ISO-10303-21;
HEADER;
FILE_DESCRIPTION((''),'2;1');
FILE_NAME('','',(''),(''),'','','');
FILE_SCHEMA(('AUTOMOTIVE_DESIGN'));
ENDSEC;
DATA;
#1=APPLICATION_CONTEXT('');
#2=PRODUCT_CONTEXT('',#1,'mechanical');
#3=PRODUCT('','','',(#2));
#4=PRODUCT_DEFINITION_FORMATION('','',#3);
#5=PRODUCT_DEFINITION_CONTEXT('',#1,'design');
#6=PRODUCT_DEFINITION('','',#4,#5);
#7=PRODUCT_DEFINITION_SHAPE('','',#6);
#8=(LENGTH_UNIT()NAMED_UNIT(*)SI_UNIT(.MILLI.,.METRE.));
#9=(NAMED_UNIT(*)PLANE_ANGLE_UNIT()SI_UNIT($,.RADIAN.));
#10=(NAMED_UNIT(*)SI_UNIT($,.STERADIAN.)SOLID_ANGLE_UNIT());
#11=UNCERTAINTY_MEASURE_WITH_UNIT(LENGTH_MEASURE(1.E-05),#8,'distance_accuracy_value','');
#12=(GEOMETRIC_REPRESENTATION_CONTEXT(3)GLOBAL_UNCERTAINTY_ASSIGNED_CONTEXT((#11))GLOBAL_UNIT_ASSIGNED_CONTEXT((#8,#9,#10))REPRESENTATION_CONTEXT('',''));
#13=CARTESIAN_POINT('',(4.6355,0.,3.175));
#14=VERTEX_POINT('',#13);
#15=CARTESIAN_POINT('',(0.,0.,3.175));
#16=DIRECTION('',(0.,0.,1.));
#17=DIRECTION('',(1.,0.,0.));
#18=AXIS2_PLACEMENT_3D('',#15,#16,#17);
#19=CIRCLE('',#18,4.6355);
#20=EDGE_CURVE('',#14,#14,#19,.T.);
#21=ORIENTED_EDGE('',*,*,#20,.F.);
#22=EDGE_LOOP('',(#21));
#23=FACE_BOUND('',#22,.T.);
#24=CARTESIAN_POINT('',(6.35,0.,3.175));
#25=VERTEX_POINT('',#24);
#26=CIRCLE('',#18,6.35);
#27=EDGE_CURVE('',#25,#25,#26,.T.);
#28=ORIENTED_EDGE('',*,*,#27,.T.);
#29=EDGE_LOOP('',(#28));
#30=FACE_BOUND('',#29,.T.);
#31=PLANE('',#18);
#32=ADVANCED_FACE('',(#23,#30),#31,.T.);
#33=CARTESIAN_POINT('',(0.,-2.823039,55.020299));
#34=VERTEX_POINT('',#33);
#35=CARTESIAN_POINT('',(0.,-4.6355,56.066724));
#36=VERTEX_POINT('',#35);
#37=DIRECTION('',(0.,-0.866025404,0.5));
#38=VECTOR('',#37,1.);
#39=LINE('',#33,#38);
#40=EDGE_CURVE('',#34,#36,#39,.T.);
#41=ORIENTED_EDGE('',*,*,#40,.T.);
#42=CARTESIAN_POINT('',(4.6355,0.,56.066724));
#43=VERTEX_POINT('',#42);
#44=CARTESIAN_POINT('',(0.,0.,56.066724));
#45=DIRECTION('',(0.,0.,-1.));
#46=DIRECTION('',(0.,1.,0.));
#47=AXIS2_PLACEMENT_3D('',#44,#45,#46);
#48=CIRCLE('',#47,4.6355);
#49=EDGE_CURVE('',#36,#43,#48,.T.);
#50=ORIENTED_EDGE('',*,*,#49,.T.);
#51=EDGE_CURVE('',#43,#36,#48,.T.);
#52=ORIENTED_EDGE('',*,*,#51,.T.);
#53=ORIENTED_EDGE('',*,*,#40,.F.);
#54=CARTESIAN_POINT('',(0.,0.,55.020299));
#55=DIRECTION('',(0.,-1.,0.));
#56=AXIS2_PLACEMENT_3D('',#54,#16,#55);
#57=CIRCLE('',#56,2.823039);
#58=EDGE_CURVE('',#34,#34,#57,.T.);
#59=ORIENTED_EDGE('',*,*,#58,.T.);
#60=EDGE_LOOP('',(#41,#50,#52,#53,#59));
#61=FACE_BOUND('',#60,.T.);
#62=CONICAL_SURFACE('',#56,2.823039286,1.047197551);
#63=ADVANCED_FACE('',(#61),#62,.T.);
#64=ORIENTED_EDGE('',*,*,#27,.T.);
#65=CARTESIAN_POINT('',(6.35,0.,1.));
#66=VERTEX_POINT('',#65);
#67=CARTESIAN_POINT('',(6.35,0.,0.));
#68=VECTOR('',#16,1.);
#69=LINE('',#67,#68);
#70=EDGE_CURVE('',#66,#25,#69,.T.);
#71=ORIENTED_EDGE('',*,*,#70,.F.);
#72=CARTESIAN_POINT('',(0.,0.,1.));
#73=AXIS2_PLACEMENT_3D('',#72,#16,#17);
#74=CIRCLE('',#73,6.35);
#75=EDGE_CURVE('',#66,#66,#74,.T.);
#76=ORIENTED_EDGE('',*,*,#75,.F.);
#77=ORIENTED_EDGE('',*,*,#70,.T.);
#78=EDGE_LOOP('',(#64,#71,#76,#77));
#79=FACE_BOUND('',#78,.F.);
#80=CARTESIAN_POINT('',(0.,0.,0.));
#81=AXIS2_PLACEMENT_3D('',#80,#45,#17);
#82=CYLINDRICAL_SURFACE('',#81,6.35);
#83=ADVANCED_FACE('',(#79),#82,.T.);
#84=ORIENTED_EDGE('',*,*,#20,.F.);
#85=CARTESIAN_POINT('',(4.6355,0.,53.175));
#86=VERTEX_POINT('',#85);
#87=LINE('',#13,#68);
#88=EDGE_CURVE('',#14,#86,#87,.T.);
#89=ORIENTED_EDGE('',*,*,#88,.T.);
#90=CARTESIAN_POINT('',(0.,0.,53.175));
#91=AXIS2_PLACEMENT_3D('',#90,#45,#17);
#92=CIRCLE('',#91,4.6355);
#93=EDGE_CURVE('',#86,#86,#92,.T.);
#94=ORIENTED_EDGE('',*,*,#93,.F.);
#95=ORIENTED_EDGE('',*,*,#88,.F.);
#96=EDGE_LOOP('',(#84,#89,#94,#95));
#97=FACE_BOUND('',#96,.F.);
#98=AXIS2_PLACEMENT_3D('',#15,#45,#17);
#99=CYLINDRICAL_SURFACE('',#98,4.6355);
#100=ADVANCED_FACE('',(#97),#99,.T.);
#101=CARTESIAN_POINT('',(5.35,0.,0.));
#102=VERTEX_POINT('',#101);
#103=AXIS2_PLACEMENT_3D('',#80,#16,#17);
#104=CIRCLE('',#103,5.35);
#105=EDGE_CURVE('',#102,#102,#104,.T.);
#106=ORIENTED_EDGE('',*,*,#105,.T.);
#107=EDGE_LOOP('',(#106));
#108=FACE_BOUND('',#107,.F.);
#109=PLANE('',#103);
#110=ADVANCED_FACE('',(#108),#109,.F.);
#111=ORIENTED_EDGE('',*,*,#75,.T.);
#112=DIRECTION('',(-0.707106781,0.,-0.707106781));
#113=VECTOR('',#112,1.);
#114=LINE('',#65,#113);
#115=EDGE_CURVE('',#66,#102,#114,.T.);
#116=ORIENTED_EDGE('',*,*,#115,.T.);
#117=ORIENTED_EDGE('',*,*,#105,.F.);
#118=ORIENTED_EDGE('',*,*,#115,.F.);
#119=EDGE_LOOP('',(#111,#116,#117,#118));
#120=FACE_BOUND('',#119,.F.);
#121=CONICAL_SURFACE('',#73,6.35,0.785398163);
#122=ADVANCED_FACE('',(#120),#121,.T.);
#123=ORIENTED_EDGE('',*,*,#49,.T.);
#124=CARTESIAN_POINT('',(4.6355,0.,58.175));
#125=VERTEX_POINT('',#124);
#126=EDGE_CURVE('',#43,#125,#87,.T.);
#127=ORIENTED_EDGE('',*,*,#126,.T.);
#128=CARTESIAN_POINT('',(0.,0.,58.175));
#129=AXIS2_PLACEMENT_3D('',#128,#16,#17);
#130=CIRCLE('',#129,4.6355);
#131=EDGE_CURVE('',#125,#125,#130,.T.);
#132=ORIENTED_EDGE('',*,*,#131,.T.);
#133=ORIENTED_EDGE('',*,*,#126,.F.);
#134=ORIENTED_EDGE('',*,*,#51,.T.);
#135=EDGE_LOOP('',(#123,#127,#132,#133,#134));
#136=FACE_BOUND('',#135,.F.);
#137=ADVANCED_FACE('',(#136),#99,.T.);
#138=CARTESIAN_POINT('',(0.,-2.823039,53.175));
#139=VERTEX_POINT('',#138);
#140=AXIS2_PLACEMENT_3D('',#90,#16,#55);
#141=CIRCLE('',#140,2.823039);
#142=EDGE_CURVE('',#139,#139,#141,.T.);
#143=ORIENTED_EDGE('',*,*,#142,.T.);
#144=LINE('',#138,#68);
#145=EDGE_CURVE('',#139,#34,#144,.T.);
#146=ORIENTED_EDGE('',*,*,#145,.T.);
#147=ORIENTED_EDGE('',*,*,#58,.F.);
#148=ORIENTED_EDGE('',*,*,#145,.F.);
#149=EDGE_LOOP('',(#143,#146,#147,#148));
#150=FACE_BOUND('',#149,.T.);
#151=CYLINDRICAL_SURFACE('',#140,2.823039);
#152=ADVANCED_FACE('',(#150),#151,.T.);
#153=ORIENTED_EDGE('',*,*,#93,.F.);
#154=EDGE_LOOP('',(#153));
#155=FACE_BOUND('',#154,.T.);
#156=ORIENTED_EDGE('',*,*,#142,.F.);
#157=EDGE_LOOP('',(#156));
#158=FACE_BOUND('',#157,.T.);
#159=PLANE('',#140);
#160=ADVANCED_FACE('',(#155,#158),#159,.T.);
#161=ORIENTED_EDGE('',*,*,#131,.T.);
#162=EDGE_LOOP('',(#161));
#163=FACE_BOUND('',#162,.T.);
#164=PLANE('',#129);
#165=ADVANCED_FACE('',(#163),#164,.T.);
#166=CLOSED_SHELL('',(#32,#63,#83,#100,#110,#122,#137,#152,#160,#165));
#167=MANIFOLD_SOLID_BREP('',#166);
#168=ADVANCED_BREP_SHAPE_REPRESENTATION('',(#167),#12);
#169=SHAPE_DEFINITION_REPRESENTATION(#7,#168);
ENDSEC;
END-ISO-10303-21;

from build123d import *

# Parameters (mm, degrees)
F0_R     = 6.35
F1_DEPTH = 3.175
F2_R     = 4.6355
F3_DEPTH = 55
F6_SIZE  = 1


# Not quite as in the source:
# - a length typed as a fraction of an inch, garbled in the dataset ("3 / 203.2 mm" for 3/8 in), is restored


with BuildPart() as f1:
    # F0 (on Top) → F1 (new body)
    with BuildSketch(Plane.XY):
        Circle(F0_R)
    extrude(amount=F1_DEPTH)

    # F2 (on face) → F3 (join)
    with BuildSketch(Plane.XY.offset(3.175)):
        Circle(F2_R)
    extrude(amount=F3_DEPTH)

    # F4 (on Right) → F5 (revolve, cut)
    with BuildSketch(Plane.YZ):
        Polygon((-2.8230392858, 55.0202994616), (-4.8230392858, 56.175), (-4.8230392858, 53.175), (-2.8230392858, 53.175), align=None)
    revolve(axis=Axis((0, 0, 58.175), (0, 0, 1)), mode=Mode.SUBTRACT)

    # F6
    f6_edges = [f1.edges().sort_by_distance(p)[0] for p in [
        (-6.35, 0, 0),
    ]]
    chamfer(f6_edges, length=F6_SIZE)


solid = f1.part
